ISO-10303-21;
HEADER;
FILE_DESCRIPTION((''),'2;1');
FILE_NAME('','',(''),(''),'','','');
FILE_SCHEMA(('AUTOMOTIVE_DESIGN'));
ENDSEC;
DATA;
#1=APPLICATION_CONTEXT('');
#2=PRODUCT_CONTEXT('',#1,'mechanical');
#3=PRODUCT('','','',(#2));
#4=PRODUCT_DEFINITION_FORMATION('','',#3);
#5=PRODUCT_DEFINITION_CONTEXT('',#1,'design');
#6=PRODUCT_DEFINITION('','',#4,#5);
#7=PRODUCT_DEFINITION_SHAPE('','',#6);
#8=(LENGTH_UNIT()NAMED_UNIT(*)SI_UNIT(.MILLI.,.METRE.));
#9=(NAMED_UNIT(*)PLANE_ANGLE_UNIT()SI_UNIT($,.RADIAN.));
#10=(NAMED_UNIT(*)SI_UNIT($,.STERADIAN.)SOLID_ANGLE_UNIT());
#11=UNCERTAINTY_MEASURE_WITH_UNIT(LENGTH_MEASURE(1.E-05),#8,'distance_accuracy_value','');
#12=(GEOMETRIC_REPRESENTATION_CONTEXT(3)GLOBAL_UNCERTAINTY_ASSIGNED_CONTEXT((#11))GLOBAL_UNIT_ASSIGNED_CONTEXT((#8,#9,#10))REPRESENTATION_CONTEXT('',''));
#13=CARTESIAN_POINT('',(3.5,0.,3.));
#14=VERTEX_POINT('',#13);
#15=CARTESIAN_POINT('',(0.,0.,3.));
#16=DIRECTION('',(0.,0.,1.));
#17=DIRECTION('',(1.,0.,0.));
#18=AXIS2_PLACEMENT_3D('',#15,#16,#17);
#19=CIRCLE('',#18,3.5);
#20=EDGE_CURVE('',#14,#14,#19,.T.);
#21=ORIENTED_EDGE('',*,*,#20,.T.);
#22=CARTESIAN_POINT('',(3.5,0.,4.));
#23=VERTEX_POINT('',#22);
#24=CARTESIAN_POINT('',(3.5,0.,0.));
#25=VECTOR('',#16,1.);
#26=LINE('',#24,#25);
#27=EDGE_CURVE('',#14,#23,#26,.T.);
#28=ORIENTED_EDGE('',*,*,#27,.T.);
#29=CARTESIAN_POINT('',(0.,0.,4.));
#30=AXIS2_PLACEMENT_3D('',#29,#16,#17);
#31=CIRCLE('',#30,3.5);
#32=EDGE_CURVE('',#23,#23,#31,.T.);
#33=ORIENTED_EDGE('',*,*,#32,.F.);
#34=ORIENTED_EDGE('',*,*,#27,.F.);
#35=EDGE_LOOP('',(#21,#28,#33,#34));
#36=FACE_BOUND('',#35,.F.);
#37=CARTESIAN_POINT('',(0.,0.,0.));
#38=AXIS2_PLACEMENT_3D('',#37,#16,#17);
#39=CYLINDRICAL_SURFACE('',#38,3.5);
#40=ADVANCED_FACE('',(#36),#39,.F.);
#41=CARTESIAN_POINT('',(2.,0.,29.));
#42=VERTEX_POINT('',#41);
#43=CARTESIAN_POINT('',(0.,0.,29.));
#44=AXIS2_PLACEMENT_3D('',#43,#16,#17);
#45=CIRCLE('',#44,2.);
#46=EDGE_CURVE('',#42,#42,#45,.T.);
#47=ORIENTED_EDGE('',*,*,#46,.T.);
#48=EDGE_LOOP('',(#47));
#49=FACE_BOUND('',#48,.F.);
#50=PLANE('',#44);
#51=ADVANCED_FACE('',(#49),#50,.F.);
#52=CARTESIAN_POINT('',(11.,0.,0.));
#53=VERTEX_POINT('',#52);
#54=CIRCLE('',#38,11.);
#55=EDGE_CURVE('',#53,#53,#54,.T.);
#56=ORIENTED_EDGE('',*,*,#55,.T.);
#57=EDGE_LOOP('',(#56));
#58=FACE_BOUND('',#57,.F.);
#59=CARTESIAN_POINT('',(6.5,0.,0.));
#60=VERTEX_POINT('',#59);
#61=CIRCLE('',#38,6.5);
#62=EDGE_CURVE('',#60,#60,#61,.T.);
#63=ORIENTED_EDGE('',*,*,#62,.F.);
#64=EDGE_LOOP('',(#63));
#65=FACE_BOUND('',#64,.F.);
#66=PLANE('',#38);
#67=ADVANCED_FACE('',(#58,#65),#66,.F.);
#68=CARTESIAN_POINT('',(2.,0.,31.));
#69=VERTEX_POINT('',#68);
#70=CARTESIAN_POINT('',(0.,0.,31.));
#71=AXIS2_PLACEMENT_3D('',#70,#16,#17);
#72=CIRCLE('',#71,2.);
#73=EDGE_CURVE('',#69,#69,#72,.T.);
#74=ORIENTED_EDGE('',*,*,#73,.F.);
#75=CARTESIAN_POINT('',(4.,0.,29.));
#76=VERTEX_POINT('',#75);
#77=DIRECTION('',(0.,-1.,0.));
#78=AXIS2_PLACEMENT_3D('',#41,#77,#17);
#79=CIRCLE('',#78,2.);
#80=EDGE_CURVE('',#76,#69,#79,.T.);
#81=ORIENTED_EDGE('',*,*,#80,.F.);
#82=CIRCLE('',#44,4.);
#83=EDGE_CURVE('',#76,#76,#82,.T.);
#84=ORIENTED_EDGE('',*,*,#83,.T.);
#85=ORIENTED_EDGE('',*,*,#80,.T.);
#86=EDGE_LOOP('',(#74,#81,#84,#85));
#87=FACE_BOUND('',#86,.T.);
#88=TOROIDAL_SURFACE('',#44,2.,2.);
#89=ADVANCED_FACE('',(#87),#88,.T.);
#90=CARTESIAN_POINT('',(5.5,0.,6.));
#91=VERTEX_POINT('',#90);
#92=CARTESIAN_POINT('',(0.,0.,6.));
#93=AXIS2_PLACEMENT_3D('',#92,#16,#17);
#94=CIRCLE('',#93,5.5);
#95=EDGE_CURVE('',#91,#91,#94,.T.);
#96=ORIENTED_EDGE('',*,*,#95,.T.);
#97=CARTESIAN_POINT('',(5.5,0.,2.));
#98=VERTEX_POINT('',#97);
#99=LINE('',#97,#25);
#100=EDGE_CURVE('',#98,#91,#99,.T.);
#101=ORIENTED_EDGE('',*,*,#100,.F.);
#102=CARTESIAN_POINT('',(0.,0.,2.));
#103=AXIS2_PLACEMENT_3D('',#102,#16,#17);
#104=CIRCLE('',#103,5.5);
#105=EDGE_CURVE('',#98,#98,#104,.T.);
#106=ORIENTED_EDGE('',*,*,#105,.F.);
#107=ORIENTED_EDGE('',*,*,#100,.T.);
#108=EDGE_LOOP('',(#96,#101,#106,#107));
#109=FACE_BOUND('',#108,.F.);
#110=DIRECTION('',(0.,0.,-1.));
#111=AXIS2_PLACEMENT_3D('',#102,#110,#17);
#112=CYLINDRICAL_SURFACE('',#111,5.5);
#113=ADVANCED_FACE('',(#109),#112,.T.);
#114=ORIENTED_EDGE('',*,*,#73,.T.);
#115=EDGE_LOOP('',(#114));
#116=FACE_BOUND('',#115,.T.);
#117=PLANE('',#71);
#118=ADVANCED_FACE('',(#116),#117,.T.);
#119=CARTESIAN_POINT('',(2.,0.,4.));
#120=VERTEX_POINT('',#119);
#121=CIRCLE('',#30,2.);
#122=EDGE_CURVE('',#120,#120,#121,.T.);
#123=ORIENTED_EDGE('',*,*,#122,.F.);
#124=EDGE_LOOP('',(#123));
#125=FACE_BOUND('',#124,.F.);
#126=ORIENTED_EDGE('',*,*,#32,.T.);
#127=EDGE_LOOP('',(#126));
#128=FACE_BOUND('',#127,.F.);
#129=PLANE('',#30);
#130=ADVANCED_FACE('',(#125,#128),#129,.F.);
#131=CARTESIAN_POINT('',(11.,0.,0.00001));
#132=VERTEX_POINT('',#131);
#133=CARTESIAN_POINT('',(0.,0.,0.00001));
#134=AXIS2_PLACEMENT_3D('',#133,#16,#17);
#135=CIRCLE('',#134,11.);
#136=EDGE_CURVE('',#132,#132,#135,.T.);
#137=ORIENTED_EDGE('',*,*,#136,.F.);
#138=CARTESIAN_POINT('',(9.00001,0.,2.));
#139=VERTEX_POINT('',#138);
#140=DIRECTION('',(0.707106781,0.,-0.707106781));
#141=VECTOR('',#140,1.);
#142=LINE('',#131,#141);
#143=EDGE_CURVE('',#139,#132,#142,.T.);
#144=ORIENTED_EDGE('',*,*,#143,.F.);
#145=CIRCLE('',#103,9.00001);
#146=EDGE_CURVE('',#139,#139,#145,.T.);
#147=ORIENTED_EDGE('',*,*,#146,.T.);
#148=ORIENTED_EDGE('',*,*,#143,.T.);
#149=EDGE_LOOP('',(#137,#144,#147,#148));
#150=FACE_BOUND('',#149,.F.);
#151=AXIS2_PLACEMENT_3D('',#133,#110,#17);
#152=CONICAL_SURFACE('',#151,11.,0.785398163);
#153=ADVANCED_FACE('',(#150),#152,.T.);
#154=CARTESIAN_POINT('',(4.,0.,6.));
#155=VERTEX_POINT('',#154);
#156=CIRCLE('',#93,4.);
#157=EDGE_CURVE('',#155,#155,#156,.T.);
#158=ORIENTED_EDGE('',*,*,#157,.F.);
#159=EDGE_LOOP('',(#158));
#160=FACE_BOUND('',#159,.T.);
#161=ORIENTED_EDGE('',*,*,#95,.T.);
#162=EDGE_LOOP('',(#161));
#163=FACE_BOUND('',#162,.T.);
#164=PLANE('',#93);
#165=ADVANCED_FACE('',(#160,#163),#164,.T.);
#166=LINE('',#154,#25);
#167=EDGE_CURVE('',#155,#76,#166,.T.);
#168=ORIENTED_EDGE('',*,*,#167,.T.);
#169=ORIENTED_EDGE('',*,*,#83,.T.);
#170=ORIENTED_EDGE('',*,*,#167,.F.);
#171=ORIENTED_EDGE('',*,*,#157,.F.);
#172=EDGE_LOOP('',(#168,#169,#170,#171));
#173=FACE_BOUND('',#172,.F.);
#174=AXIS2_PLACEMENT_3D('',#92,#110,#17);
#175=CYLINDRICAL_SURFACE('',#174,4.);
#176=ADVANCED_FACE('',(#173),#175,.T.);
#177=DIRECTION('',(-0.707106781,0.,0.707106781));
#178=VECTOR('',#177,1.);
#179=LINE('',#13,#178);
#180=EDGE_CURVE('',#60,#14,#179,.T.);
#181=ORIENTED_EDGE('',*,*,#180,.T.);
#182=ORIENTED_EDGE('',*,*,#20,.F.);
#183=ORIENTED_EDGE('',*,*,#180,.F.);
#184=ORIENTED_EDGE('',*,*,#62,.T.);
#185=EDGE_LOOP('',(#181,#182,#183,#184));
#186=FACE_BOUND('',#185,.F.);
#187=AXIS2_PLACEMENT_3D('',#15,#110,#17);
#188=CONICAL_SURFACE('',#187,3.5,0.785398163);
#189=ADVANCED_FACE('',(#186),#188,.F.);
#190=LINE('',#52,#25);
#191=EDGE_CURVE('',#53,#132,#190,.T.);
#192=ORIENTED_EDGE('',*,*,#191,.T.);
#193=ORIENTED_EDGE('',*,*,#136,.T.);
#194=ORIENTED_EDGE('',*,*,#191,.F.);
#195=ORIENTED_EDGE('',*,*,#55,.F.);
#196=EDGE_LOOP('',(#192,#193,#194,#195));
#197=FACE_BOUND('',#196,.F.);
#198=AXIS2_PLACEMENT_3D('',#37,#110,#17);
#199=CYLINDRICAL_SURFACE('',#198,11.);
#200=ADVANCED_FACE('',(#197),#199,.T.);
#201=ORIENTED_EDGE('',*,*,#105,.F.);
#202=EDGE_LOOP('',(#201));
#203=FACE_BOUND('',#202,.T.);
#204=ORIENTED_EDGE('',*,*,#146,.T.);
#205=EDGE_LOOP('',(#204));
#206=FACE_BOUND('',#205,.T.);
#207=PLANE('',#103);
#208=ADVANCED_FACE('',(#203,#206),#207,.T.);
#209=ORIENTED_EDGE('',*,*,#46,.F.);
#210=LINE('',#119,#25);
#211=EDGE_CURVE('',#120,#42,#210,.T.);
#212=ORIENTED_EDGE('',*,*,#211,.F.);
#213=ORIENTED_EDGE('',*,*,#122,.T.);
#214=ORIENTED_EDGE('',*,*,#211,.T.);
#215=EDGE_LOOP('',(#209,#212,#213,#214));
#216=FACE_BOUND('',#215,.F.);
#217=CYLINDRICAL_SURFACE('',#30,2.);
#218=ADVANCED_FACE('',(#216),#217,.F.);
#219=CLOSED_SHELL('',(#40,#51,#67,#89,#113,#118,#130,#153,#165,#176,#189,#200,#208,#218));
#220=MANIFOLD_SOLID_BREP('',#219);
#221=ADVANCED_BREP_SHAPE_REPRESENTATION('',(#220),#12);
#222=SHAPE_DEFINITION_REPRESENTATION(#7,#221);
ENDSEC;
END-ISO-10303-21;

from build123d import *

# Parameters (mm, degrees)
F0_R     = 11
F1_DEPTH = 2
F2_R     = 5.5
F3_DEPTH = 4
F4_R     = 4
F5_DEPTH = 25
F6_R     = 2
F7_SIZE  = 1.99999
F8_T     = 2
F9_SIZE  = 3


# Not quite as in the source:
# - a fillet or chamfer is up to 0.001 mm smaller than in the source, because OpenCascade refuses the exact size
# - a shell that OpenCascade refuses in one call is made with other operations: the cavity is built on its own and cut out


with BuildPart() as f1:
    # F0 (on Top) → F1 (new body)
    with BuildSketch(Plane.XY):
        Circle(F0_R)
    extrude(amount=F1_DEPTH)

    # F2 (on face) → F3 (join)
    with BuildSketch(Plane.XY.offset(2)):
        Circle(F2_R)
    extrude(amount=F3_DEPTH)

    # F4 (on face) → F5 (join)
    with BuildSketch(Plane.XY.offset(6)):
        Circle(F4_R)
    extrude(amount=F5_DEPTH)

    # F6
    f6_edges = [f1.edges().sort_by_distance(p)[0] for p in [
        (-4, 0, 31),
    ]]
    fillet(f6_edges, radius=F6_R)

    # F7 (size 2 in the source; OpenCascade refuses exactly that, so slightly less here)
    f7_edges = [f1.edges().sort_by_distance(p)[0] for p in [
        (-11, 0, 2),
    ]]
    chamfer(f7_edges, length=F7_SIZE)

    # F8: shell of thickness 2, made by hand


with BuildPart() as f8_core1:
    # F8_t2: copy of F1
    add(f1.part)

    # the walls: a layer under each face that stays
    f8_faces = [f8_core1.faces().sort_by_distance(p)[0] for p in [
        (-6.0000066667, -6.0000066667, 2),
        (-10.000005, 0, 1.000005),
        (-5.5, 0, 4),
        (-11, 0, 5e-06),
        (-3.6666666667, -3.6666666667, 6),
        (-4, 0, 17.5),
        (0, 0, 31),
    ]]
    thicken(f8_faces, amount=-F8_T, mode=Mode.SUBTRACT)

    # F8_s3 → F8_t4 (revolve, cut)
    with BuildSketch(Plane.XZ):
        Polygon((5.52, 2.02), (5.5, 0), (3.5, 0), (3.5, 2), align=None)
    revolve(axis=Axis((0, 0, 2), (0, 0, 1)), mode=Mode.SUBTRACT)

    # F8_s5 → F8_t6 (revolve, cut)
    with BuildSketch(Plane.XZ):
        Polygon((4.02, 6.02), (4, 4), (2, 4), (2, 6), align=None)
    revolve(axis=Axis((0, 0, 6), (0, 0, 1)), mode=Mode.SUBTRACT)


with BuildPart() as f1_1:
    add(f1.part)

    # what is left inside the walls is the cavity
    f8_cavity = [f8_core1.part.solids().sort_by_distance(p)[0] for p in [
        (-1.98, 0, 12.333333),
    ]]
    add(f8_cavity, mode=Mode.SUBTRACT)

    # F9
    f9_edges = [f1_1.edges().sort_by_distance(p)[0] for p in [
        (-3.5, 0, 0),
    ]]
    chamfer(f9_edges, length=F9_SIZE)


solid = f1_1.part
